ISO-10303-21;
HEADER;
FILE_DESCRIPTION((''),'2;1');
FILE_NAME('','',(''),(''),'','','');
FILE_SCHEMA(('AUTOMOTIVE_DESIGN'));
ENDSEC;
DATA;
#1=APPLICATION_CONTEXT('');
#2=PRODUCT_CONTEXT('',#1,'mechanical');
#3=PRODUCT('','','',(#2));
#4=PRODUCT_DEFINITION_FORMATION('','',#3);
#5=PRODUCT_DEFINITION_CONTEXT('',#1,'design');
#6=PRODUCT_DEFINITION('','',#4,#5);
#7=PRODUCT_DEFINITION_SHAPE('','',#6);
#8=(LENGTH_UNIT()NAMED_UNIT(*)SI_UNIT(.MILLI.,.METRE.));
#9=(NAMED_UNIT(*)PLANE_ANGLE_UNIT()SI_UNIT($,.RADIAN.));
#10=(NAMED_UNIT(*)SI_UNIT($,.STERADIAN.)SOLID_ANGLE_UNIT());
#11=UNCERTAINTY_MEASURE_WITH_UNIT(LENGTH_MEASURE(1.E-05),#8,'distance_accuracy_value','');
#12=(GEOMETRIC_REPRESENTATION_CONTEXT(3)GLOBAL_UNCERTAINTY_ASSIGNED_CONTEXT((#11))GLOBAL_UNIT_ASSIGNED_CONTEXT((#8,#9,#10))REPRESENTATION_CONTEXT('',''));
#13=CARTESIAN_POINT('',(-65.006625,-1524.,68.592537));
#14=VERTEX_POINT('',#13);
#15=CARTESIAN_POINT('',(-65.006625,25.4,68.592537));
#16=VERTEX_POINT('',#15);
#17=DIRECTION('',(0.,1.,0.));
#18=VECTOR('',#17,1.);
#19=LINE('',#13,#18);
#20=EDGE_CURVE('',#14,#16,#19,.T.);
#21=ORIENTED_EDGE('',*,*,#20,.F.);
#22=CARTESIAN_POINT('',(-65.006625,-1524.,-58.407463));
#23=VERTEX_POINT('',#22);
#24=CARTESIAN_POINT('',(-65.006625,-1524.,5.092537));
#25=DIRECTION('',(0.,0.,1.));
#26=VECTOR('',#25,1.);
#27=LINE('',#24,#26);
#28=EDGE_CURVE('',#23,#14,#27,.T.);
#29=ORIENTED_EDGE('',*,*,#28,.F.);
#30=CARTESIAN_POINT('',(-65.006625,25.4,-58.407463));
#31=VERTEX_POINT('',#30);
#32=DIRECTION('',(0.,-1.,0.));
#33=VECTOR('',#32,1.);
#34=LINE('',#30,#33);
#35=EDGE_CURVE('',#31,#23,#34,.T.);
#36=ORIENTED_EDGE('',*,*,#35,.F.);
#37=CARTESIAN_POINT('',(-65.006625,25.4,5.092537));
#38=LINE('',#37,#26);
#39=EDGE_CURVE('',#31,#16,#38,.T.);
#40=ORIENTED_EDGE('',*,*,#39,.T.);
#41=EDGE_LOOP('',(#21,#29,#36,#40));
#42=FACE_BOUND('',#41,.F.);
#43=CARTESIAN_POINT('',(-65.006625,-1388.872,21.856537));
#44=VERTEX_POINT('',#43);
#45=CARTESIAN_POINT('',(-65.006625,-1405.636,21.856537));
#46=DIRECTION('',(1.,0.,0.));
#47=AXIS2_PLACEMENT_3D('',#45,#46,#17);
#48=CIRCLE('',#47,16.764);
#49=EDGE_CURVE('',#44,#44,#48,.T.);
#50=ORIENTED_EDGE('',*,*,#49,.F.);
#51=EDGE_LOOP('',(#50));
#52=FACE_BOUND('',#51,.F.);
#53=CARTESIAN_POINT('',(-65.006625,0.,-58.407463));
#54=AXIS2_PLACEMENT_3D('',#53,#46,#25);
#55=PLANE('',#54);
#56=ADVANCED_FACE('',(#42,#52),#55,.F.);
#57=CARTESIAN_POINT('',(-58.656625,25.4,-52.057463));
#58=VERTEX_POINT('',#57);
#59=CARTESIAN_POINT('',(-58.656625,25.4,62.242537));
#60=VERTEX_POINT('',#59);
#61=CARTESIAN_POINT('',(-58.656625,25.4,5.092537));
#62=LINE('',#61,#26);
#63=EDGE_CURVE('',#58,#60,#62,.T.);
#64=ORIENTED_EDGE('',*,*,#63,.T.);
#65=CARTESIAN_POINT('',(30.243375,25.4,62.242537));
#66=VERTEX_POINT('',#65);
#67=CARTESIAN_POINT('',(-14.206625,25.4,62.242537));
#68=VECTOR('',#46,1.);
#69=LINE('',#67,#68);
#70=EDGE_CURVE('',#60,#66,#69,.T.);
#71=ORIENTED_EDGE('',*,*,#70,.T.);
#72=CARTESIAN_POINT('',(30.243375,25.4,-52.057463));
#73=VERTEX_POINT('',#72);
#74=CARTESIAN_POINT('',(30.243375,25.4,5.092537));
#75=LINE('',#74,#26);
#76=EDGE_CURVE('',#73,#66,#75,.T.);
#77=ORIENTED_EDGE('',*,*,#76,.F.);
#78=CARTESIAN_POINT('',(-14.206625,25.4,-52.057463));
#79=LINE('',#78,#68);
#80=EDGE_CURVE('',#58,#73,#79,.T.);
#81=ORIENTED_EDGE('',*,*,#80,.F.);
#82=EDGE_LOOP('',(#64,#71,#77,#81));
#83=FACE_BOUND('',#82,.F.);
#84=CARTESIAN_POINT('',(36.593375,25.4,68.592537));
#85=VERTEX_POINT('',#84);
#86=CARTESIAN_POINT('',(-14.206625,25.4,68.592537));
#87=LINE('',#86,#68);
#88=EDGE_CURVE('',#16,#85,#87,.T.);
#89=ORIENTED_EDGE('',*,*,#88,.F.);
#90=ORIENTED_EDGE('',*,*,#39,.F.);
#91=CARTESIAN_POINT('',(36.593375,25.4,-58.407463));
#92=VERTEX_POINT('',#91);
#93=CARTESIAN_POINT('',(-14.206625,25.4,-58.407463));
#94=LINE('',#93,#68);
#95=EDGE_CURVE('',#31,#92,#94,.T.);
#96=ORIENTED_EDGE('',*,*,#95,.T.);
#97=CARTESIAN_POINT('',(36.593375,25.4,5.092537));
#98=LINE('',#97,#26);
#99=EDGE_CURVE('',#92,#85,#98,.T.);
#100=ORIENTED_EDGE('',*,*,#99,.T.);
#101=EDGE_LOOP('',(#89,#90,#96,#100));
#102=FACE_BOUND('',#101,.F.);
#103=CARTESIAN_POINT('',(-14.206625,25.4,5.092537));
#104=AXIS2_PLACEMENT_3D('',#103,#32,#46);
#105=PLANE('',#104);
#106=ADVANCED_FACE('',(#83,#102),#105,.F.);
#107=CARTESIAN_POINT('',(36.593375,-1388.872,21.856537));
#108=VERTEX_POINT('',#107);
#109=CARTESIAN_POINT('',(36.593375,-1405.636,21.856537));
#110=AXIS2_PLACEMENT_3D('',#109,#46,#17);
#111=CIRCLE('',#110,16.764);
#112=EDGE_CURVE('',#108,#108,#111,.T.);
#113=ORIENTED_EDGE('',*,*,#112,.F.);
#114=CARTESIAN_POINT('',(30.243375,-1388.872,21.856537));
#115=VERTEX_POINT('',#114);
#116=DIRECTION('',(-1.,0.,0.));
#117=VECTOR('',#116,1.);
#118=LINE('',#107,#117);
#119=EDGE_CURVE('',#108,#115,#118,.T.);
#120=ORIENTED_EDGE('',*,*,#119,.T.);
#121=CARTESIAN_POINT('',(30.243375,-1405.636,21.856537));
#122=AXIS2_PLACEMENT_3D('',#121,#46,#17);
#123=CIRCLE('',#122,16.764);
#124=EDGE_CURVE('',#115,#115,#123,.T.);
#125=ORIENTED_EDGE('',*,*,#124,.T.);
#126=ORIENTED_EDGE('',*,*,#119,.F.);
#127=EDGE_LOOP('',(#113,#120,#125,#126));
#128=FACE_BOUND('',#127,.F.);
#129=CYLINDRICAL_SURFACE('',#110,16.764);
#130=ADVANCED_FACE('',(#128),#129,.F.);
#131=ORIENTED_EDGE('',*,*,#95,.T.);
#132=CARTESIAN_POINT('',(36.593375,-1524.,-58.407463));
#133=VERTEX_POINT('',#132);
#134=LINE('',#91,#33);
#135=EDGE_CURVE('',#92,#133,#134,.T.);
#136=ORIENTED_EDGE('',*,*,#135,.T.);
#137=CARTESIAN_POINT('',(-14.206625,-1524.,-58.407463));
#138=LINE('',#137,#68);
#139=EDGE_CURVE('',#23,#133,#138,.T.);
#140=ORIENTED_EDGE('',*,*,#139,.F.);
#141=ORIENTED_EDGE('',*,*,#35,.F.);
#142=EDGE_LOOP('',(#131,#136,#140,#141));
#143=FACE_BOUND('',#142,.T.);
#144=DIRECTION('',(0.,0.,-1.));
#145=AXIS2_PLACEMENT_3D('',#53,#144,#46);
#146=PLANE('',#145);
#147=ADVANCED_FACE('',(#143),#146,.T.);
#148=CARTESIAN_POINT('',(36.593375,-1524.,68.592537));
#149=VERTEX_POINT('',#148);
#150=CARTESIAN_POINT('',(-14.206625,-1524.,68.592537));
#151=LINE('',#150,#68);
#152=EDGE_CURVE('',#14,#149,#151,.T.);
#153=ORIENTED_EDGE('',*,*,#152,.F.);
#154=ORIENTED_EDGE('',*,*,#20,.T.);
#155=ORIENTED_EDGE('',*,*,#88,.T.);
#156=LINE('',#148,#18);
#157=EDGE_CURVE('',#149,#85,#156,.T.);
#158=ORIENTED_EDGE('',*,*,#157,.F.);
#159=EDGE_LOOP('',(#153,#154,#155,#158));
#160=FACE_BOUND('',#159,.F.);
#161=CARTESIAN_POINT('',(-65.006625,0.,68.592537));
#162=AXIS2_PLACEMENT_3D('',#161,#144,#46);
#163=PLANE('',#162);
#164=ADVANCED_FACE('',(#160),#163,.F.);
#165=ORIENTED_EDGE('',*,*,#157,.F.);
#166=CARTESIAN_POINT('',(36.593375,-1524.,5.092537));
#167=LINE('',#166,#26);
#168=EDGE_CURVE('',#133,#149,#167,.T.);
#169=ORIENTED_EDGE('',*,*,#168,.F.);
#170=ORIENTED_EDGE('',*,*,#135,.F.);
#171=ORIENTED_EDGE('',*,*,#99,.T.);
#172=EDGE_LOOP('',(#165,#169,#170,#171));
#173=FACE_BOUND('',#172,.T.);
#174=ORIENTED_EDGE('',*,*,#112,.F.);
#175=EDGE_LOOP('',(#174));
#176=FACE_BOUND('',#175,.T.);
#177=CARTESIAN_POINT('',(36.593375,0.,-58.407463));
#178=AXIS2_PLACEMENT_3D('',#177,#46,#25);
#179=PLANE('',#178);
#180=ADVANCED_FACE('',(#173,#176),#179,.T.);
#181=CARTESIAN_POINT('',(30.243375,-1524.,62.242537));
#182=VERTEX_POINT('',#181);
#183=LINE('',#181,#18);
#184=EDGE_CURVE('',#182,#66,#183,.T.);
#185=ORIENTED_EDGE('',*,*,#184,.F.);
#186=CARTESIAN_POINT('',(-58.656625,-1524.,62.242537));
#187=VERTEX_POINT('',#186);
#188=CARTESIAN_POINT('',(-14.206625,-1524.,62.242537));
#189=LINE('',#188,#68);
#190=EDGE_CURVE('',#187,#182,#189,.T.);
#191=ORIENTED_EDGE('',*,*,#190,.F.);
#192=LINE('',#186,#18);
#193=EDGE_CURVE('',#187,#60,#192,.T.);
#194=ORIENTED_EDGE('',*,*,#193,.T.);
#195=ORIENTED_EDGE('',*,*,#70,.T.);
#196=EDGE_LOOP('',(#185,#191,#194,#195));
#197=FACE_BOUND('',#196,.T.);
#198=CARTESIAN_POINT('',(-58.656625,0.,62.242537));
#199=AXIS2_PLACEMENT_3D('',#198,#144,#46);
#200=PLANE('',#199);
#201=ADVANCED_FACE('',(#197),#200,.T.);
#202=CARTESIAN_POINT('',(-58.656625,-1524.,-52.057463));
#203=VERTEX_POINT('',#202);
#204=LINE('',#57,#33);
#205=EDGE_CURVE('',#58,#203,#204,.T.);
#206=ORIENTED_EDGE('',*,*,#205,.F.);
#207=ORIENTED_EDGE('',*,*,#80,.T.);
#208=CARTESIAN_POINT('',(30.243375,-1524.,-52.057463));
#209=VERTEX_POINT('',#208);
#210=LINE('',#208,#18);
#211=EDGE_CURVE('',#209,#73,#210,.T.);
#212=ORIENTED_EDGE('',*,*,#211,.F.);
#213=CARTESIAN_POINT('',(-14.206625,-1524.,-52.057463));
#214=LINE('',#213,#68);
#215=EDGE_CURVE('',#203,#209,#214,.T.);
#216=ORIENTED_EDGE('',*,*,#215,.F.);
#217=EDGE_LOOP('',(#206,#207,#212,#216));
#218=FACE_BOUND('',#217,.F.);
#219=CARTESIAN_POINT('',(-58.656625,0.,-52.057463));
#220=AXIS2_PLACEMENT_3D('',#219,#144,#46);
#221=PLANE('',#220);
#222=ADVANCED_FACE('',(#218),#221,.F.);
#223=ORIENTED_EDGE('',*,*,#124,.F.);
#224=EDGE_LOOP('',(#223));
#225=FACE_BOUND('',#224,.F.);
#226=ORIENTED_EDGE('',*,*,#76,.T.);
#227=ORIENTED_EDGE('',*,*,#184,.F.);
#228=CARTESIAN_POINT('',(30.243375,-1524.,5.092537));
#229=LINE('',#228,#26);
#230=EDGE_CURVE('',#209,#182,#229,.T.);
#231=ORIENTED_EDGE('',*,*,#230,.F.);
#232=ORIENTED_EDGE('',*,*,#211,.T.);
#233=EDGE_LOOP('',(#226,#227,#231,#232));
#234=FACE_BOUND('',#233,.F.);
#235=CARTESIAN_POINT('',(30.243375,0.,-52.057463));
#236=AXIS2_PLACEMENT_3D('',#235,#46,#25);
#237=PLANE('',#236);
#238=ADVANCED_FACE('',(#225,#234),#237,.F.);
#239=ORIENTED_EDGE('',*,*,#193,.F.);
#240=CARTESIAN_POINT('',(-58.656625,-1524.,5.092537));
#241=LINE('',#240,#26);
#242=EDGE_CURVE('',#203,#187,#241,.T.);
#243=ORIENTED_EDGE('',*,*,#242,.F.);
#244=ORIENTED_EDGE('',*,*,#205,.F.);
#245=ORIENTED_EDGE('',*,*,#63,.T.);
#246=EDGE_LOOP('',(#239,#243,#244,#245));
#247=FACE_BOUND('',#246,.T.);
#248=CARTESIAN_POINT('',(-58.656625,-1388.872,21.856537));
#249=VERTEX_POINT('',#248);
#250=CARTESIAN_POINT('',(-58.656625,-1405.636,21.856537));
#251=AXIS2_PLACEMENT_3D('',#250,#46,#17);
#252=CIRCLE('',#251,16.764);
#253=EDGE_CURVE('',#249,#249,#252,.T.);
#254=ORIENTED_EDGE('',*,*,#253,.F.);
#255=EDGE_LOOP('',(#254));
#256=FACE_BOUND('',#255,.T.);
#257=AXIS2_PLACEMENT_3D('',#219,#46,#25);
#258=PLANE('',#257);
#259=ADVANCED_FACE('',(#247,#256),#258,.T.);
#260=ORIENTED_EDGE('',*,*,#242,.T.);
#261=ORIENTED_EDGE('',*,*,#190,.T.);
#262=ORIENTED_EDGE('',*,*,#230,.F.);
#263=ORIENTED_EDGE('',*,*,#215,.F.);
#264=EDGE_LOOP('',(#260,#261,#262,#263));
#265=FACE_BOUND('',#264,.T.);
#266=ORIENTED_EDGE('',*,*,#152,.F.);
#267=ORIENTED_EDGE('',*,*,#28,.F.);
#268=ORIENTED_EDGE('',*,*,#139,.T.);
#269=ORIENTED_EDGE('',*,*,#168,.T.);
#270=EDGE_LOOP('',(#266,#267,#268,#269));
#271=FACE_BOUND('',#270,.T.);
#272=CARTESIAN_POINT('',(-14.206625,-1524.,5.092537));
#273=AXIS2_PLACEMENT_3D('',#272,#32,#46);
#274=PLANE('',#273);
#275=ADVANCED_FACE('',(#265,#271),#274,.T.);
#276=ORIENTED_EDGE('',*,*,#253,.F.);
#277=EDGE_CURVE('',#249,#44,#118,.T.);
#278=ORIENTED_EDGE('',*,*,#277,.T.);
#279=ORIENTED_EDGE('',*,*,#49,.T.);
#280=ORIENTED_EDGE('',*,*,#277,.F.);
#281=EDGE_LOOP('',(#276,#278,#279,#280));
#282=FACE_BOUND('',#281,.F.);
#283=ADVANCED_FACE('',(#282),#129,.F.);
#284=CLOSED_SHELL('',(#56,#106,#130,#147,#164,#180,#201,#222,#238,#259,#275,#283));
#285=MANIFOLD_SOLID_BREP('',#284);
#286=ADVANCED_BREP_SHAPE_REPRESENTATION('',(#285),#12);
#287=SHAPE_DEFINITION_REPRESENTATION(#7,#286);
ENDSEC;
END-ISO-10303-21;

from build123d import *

# Parameters (mm, degrees)
F0_W          = 101.6
F0_H          = 127
F0_W_2        = 88.9
F0_H_2        = 114.3
F1_DEPTH      = 1524
F1_DEPTH_BACK = 25.4
F2_R          = 16.764
F3_DEPTH      = 127


# Not quite as in the source:
# - a feature names something its author has since deleted; it is built from what else it names


with BuildPart() as f1:
    # F0 (on Front) → F1 (new body, two sides)
    with BuildSketch(Plane.XZ) as f1_sk:
        with Locations((-14.2066246522, 5.0925366492)):
            Rectangle(F0_W, F0_H)
        with Locations((-14.2066246522, 5.0925366492)):
            Rectangle(F0_W_2, F0_H_2, mode=Mode.SUBTRACT)
    extrude(amount=F1_DEPTH)
    extrude(f1_sk.sketch, amount=-F1_DEPTH_BACK)

    # F2 (on face) → F3 (cut)
    with BuildSketch(Plane.YZ.offset(36.5933753478)):
        with Locations((-1405.636, 21.8565366492)):
            Circle(F2_R)
    extrude(amount=-F3_DEPTH, mode=Mode.SUBTRACT)


solid = f1.part
